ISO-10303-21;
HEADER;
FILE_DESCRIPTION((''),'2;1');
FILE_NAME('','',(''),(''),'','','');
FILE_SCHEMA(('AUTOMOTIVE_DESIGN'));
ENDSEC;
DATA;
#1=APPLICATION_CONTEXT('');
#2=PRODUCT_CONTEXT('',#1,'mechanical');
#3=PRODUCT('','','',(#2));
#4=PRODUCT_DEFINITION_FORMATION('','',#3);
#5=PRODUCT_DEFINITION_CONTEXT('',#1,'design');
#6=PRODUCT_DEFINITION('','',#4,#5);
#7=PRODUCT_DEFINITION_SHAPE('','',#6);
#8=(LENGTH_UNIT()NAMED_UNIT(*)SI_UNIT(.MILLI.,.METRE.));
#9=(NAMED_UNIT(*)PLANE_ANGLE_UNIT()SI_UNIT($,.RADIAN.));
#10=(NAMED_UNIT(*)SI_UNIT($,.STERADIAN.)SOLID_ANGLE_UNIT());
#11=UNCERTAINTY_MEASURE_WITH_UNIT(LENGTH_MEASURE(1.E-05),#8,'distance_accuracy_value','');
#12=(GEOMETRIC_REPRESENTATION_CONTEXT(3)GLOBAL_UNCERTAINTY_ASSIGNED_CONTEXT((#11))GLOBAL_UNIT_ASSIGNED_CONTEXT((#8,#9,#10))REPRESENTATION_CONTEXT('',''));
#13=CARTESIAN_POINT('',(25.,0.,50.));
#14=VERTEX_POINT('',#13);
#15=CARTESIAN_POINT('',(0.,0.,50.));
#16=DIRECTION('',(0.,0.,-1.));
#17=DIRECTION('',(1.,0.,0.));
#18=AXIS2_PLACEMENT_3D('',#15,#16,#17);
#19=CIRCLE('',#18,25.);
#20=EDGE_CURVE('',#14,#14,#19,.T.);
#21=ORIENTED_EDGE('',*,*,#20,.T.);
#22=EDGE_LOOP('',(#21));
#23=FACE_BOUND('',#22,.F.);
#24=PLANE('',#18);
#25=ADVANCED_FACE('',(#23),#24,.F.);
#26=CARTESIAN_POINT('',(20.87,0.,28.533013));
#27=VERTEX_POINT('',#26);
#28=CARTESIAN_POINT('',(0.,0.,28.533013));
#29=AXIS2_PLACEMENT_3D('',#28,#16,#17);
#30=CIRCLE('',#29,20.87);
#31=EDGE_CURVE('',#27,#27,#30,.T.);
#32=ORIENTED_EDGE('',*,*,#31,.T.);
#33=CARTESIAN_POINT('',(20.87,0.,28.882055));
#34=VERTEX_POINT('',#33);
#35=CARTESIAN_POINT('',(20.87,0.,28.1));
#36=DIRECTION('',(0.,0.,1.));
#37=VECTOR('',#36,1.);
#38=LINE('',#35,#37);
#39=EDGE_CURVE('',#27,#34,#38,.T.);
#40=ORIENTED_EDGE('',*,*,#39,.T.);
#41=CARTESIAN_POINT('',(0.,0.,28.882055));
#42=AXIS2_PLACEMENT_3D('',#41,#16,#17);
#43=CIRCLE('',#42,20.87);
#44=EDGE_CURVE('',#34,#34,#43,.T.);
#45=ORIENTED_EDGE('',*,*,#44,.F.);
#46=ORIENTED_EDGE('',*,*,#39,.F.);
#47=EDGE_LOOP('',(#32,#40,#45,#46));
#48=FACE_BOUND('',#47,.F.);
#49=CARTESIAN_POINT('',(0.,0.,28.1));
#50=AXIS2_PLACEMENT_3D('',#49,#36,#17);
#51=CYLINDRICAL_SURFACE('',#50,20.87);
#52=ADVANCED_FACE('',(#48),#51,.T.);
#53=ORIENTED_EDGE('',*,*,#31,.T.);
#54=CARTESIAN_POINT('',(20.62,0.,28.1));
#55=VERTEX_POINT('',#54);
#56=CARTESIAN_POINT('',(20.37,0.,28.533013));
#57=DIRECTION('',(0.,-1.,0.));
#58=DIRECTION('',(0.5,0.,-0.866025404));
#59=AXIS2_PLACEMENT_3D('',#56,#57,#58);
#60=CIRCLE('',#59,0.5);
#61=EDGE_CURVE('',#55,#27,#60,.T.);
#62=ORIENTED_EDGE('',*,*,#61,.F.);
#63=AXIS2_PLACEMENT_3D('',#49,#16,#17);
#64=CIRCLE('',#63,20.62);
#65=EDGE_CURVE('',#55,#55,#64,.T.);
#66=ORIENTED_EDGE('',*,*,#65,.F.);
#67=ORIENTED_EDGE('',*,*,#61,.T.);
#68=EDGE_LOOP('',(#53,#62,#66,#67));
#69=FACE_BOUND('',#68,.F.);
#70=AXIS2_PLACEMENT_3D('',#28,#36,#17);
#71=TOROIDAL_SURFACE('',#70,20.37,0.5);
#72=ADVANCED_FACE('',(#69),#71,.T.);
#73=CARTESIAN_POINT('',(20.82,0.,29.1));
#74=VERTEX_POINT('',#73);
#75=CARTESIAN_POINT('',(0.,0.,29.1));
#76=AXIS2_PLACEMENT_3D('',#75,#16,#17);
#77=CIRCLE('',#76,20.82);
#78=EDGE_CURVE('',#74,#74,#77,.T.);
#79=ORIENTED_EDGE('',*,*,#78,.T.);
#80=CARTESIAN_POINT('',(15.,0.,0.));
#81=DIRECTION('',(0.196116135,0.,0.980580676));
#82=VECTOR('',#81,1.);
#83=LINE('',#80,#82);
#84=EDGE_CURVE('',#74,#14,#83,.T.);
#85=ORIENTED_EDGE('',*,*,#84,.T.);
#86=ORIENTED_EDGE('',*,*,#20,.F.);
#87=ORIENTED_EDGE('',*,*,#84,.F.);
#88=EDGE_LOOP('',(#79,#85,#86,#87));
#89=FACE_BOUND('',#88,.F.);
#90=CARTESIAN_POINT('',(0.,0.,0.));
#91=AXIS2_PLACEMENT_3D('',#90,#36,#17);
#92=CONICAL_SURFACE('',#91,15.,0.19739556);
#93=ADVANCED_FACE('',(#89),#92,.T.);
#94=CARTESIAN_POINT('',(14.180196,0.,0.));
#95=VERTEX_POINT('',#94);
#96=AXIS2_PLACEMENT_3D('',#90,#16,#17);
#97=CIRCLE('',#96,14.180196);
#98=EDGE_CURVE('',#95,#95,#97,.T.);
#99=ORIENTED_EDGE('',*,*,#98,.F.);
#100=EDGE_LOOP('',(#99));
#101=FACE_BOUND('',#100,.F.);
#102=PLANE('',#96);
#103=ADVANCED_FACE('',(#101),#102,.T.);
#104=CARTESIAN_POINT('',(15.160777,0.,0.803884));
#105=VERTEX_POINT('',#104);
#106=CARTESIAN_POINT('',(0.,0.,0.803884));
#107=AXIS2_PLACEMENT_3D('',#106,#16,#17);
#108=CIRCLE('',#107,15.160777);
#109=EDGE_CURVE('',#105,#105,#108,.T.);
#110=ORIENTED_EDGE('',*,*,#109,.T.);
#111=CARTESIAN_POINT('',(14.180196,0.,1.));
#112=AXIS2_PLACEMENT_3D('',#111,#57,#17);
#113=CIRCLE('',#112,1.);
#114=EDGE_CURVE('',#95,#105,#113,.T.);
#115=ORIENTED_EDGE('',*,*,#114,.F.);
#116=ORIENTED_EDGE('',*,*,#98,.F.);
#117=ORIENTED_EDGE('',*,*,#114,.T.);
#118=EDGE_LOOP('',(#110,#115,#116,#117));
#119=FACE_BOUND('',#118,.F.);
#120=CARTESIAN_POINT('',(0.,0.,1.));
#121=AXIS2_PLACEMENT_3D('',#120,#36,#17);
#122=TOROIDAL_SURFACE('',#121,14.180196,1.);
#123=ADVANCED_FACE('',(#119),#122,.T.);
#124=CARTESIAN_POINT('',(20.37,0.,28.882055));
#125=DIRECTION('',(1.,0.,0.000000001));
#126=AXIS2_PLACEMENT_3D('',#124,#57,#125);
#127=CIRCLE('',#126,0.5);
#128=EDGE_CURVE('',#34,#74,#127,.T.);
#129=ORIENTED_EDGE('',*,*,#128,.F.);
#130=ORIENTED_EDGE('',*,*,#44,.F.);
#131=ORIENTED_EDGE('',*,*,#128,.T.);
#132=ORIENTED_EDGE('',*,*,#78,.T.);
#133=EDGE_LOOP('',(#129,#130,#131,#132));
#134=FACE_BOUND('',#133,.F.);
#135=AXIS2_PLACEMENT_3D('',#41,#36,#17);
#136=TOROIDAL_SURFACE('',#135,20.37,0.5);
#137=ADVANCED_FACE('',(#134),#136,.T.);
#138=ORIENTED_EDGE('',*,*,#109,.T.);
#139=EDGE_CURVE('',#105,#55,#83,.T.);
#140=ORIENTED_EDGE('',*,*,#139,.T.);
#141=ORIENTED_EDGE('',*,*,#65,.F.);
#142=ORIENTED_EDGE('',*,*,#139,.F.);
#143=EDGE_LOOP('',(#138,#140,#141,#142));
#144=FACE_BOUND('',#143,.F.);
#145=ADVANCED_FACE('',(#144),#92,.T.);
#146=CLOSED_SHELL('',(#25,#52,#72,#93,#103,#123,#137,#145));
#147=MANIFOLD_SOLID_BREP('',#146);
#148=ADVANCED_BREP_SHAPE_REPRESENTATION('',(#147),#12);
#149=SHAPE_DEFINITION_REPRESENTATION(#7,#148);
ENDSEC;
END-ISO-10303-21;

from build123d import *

# Parameters (mm, degrees)
F2_R = 1


# Not quite as in the source:
# - a fillet or chamfer that OpenCascade refuses, or shapes differently, is made with other operations: its cross-section is extruded or revolved along the edge and cut away or added


with BuildPart() as f1:
    # F0 (on Front) → F1 (revolve)
    with BuildSketch(Plane.XZ):
        Polygon((0, 50), (0, 0), (15, 0), (20.62, 28.1), (20.82, 29.1), (25, 50), align=None)
        Polygon((20.82, 29.1), (20.62, 28.1), (20.87, 28.1), (20.87, 29.1), align=None)
    revolve(axis=Axis((0, 0, 25), (0, 0, -1)))

    # F2
    f2_edges = [f1.edges().sort_by_distance(p)[0] for p in [
        (-15, 0, 0),
    ]]
    fillet(f2_edges, radius=F2_R)

    # F3: fillet of radius 0.5 on 2 edges, made by hand

    # F3_s1 → F3_t2 (revolve, cut)
    with BuildSketch(Plane.XZ):
        with BuildLine():
            ThreePointArc((20.62, 28.1), (20.8030127019, 28.2830127019), (20.87, 28.5330127019))
            Line((20.87, 28.5330127019), (20.88, 28.5330127019))
            Line((20.88, 28.5330127019), (20.88, 28.1))
            Line((20.88, 28.1), (20.87, 28.09))
            ThreePointArc((20.87, 28.09), (20.745, 28.09), (20.625, 28.091339746))
            Line((20.625, 28.091339746), (20.62, 28.1))
        make_face()
    revolve(axis=Axis((0, 0, 28.1), (0, 0, -1)), mode=Mode.SUBTRACT)

    # F3_s3 → F3_t4 (revolve, cut)
    with BuildSketch(Plane.XZ):
        with BuildLine():
            ThreePointArc((20.87, 28.8820550528), (20.8573397172, 28.9938584517), (20.82, 29.1))
            Line((20.82, 29.1), (20.829, 29.1043588989))
            ThreePointArc((20.829, 29.1043588989), (20.845, 29.11), (20.87, 29.11))
            Line((20.87, 29.11), (20.88, 29.1))
            Line((20.88, 29.1), (20.88, 28.8820550528))
            Line((20.88, 28.8820550528), (20.87, 28.8820550528))
        make_face()
    revolve(axis=Axis((0, 0, 29.1), (0, 0, -1)), mode=Mode.SUBTRACT)


solid = f1.part
